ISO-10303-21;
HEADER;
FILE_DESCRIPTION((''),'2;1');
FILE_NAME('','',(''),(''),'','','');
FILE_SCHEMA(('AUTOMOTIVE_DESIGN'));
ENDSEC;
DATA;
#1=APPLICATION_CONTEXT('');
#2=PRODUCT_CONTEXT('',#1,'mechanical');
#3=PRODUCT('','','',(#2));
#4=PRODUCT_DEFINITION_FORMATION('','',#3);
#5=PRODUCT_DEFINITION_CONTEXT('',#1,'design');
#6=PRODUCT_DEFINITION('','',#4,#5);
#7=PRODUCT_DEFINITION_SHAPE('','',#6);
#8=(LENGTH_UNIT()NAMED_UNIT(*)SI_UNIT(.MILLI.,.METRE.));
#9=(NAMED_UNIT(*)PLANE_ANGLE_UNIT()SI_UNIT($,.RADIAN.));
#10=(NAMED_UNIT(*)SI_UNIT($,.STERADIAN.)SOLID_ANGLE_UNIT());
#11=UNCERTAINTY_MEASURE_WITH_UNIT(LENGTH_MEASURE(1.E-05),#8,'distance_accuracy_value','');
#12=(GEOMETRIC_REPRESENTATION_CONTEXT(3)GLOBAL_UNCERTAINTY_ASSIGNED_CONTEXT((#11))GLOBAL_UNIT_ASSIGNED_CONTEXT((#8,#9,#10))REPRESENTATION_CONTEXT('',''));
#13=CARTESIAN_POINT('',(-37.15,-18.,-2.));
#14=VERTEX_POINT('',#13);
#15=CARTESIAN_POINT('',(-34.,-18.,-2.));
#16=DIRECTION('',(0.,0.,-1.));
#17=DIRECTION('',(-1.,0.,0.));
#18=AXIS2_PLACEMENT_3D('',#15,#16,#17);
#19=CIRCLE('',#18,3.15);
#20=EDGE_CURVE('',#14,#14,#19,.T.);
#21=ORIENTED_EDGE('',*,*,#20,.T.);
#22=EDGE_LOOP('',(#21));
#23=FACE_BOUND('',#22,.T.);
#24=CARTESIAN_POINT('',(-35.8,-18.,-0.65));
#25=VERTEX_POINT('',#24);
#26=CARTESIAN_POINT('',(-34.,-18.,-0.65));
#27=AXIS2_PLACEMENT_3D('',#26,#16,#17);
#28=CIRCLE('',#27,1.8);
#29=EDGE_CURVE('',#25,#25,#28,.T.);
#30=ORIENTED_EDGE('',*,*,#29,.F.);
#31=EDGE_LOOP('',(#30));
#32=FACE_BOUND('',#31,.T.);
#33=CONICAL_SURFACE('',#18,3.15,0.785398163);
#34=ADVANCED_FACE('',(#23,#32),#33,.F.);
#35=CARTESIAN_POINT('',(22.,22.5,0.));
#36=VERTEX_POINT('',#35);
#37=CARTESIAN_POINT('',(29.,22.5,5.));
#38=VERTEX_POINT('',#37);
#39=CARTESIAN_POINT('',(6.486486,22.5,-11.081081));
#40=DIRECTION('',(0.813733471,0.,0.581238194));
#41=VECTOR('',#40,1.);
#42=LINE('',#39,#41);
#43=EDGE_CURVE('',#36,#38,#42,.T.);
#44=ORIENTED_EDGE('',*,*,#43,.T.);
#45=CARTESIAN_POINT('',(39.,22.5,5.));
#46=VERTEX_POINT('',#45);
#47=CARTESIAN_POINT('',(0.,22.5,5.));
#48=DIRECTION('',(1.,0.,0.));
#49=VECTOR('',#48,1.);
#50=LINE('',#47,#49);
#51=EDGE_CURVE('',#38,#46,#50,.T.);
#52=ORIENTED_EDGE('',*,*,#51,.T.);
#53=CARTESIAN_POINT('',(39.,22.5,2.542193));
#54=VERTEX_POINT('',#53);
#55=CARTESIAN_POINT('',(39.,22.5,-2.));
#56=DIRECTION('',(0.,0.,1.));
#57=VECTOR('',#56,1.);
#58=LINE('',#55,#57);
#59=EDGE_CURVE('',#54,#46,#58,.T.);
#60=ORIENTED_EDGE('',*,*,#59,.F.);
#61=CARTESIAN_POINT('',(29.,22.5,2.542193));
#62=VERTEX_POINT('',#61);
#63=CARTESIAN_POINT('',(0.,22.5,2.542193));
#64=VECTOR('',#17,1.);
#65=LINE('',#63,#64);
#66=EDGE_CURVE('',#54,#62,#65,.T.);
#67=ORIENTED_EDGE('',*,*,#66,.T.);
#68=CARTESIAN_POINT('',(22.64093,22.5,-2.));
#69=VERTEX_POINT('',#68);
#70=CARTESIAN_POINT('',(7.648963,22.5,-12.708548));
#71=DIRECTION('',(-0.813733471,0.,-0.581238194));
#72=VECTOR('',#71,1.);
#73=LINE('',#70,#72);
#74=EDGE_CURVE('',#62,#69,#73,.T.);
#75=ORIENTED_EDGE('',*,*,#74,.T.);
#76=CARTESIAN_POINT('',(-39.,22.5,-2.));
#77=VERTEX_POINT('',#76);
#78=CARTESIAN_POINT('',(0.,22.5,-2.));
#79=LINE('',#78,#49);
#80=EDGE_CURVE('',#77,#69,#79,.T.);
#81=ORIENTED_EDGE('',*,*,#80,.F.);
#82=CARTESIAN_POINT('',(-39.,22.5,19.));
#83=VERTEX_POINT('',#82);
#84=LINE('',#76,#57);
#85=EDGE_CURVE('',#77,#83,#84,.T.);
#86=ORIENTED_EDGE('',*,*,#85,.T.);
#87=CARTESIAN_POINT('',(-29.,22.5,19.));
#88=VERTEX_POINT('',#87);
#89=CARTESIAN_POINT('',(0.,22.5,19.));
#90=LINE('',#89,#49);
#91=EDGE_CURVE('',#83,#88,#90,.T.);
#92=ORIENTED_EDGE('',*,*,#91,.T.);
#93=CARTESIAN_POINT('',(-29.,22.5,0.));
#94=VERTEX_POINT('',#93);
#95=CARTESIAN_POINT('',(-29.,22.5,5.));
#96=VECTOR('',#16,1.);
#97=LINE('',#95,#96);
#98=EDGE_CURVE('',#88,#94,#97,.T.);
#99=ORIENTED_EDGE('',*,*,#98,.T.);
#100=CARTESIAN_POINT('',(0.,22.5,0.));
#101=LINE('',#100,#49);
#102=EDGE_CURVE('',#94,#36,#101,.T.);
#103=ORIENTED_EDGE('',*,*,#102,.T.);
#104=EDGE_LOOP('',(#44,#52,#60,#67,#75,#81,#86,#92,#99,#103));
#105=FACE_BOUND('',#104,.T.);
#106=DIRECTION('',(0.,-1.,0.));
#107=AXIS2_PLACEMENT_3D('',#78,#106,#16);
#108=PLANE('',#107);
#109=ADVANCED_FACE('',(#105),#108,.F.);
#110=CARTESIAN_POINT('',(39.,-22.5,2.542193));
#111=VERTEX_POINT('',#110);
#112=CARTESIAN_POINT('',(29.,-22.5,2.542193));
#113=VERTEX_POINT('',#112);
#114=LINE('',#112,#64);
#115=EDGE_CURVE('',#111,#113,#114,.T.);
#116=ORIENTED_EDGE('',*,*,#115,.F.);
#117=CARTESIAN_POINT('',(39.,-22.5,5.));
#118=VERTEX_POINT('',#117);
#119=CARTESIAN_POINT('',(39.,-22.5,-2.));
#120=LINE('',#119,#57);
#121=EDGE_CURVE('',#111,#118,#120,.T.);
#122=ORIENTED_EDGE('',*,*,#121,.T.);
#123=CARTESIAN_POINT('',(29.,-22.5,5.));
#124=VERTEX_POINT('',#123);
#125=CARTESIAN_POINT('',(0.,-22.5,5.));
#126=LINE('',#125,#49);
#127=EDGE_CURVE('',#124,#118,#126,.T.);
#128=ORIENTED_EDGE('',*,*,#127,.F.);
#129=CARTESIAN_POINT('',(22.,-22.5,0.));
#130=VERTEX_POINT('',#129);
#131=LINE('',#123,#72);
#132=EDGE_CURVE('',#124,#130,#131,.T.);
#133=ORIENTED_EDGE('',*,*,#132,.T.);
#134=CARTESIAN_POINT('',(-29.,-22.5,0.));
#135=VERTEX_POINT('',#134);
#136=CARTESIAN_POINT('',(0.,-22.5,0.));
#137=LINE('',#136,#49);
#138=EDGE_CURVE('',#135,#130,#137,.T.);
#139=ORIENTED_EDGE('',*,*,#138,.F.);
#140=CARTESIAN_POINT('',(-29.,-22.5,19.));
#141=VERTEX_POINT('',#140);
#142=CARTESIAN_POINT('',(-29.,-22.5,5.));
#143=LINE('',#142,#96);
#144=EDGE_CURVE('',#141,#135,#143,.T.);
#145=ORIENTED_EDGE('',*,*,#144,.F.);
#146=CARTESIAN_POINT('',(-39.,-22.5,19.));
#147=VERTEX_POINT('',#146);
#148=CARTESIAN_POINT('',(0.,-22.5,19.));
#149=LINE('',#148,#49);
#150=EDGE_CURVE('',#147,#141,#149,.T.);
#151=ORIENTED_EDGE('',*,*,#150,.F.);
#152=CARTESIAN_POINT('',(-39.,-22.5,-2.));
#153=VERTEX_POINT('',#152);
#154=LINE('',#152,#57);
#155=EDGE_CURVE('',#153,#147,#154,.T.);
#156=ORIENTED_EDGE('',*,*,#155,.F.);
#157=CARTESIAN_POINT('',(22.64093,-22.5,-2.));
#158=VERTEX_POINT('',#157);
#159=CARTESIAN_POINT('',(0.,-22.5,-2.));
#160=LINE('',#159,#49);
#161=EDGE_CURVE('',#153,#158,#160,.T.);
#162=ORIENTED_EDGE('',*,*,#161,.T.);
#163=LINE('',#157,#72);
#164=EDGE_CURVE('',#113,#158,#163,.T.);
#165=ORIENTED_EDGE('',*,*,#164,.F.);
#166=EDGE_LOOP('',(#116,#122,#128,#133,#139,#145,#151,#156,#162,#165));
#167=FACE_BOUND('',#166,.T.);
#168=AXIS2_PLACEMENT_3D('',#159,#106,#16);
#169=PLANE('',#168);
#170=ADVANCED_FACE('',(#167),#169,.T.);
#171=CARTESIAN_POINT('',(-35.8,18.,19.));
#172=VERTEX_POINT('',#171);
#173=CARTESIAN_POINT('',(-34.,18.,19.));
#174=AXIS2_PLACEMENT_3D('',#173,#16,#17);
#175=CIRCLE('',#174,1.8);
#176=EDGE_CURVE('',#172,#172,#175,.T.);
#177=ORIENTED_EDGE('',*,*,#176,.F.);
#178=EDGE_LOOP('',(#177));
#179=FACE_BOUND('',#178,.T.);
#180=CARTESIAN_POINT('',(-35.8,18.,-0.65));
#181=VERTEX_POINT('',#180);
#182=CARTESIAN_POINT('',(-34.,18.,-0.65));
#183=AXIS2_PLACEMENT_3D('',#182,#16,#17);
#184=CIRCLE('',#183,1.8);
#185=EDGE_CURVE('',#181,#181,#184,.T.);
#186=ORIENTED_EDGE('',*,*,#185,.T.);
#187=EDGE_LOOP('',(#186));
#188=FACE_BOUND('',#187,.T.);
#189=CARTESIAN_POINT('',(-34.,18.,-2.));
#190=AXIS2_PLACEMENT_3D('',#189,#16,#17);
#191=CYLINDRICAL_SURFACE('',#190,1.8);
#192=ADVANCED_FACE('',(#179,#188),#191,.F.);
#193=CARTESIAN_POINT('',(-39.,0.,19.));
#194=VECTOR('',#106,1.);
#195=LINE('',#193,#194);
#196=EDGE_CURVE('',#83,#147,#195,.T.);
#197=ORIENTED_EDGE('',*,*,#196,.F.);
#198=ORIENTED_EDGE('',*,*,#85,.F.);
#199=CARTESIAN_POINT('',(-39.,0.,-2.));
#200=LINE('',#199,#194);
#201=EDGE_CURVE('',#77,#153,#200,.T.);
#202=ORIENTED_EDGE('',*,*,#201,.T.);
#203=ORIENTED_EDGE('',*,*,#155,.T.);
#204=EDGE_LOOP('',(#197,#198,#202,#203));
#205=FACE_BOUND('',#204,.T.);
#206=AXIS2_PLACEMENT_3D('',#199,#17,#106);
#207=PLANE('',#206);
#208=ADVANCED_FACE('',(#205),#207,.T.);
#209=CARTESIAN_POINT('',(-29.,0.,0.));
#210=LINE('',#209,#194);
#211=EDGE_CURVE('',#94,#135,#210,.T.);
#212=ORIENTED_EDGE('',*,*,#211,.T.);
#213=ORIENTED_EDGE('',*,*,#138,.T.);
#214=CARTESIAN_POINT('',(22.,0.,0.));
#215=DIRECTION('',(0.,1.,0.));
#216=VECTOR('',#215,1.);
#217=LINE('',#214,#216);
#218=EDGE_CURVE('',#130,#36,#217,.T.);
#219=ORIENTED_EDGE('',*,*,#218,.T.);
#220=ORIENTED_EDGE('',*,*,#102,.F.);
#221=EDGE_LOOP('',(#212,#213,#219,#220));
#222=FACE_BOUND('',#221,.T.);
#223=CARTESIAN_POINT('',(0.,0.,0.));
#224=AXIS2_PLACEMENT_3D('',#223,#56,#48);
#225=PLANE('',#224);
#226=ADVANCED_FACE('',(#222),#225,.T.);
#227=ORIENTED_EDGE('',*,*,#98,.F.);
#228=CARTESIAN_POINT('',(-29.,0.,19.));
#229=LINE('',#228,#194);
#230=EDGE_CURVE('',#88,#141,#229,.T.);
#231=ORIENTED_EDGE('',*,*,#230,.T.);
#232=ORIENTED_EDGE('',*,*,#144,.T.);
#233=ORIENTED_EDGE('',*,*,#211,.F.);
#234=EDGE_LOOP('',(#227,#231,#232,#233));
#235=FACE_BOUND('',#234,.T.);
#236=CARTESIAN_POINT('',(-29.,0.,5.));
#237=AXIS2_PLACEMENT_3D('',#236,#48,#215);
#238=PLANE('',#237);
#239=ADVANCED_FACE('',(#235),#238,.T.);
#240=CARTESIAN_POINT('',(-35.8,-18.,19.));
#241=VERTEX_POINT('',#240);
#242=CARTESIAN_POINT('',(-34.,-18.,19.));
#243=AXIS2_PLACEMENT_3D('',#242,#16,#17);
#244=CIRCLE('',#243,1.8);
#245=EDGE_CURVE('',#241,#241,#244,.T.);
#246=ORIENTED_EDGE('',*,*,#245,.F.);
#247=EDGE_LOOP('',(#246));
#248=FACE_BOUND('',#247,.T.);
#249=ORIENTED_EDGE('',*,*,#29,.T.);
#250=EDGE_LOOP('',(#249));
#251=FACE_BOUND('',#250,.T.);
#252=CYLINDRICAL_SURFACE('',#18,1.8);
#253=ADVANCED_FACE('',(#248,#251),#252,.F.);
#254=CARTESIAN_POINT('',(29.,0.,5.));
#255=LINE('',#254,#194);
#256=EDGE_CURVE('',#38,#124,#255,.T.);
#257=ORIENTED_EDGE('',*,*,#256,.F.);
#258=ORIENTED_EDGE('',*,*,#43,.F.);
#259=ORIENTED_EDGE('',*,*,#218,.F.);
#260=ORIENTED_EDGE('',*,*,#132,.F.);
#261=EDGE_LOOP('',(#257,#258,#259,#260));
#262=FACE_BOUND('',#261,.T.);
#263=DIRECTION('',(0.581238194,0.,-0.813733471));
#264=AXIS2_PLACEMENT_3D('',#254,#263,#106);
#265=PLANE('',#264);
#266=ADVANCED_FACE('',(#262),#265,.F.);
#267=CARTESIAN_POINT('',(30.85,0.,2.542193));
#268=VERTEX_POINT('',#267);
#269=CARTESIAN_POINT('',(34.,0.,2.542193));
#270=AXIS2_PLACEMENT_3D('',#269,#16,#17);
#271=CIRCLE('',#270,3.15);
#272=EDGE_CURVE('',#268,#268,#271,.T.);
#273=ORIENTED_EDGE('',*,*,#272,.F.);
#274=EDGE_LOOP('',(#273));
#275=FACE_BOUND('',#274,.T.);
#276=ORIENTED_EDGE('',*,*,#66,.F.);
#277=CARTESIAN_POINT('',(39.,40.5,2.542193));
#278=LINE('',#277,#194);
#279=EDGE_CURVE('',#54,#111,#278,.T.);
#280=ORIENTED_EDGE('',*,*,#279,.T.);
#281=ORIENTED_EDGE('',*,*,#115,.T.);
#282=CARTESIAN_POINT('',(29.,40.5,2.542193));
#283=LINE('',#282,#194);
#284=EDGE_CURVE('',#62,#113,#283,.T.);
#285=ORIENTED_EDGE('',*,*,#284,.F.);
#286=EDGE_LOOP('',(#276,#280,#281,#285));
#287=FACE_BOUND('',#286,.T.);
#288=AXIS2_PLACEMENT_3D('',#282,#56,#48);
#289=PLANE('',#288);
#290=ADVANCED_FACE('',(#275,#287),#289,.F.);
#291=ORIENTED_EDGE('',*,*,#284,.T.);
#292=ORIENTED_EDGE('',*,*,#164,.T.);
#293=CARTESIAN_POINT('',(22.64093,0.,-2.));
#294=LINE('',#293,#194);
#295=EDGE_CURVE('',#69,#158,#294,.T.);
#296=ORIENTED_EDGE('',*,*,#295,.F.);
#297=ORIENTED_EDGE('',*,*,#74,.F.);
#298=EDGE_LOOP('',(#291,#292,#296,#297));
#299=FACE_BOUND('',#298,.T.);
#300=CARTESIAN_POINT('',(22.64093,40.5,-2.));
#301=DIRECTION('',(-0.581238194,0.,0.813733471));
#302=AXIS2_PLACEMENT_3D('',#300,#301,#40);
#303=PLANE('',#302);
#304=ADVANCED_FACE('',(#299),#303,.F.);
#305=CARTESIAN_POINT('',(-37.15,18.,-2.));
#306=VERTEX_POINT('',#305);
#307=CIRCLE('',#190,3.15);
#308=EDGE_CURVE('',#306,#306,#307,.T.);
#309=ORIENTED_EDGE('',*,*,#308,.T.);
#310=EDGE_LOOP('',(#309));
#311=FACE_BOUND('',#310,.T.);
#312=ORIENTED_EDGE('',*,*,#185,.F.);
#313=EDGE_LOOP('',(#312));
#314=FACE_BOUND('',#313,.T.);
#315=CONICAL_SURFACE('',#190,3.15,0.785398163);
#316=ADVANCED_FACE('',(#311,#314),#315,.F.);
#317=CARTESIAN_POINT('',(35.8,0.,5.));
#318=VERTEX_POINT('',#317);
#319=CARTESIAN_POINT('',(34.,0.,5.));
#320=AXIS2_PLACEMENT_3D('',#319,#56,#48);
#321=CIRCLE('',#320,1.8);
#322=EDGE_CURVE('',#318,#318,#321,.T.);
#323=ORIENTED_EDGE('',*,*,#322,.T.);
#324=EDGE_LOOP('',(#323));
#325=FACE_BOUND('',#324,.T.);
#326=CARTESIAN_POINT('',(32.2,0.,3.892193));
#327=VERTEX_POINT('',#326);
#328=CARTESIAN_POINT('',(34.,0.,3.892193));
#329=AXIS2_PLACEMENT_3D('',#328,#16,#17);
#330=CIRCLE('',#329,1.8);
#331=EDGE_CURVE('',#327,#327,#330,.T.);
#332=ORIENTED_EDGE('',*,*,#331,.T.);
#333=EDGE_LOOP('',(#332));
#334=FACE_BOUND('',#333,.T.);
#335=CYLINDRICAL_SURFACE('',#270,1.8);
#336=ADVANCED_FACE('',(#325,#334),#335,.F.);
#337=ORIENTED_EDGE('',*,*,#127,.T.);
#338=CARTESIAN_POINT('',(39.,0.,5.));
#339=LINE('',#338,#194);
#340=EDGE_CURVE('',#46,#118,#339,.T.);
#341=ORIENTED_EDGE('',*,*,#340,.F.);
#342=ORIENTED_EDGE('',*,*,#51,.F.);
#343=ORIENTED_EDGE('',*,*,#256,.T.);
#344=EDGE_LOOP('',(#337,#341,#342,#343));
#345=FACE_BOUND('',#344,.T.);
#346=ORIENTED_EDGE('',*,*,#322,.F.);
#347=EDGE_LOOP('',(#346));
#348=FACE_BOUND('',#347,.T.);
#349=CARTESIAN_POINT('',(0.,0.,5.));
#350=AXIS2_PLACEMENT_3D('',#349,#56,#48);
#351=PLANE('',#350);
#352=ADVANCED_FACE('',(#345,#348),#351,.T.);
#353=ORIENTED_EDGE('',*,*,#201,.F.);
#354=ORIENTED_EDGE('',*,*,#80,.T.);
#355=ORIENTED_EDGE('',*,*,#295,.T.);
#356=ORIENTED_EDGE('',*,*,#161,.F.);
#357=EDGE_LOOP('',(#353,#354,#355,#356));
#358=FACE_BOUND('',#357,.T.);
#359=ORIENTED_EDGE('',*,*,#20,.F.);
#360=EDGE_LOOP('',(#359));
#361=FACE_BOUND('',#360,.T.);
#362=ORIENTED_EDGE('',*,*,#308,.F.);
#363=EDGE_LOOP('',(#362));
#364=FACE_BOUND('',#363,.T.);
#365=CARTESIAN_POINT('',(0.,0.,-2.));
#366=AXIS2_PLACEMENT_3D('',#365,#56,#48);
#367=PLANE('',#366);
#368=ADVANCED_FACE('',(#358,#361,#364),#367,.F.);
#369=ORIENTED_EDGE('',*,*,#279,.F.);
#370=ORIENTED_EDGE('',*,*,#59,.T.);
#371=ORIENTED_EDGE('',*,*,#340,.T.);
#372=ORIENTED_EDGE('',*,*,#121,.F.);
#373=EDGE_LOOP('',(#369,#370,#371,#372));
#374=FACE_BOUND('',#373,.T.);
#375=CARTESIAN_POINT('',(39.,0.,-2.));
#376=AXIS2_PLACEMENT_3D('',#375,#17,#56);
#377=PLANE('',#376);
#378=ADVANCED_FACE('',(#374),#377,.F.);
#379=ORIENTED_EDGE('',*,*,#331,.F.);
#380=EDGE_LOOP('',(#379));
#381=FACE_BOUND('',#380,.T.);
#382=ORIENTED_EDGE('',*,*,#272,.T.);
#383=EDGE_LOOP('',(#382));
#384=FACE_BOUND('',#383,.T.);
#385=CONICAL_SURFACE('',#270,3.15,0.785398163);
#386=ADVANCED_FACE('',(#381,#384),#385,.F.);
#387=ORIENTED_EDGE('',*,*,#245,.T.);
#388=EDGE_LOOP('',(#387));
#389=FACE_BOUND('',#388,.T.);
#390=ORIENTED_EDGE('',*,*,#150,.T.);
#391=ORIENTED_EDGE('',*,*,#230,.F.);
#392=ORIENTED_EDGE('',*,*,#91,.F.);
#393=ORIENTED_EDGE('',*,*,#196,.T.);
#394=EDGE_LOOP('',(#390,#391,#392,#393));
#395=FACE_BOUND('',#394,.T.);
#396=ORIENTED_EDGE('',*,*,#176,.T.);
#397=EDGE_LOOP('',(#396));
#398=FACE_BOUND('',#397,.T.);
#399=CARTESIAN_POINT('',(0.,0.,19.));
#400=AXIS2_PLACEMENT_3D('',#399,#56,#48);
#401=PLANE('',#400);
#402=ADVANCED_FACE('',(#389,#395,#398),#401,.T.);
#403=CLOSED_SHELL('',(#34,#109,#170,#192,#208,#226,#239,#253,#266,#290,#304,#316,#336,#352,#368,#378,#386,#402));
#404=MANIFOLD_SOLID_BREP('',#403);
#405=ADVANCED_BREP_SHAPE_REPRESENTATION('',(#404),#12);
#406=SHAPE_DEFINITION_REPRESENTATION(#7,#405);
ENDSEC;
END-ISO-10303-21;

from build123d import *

# Parameters (mm, degrees)
SKETCH1_W                                           = 78
SKETCH1_H                                           = 45
SKETCH1_R                                           = 1.65
BOSS_EXTRUDE1_DEPTH                                 = 2
BOSS_EXTRUDE2_START                                 = 5
SKETCH1_3_W                                         = 10
SKETCH1_3_H                                         = 45
SKETCH1_3_R                                         = 1.65
BOSS_EXTRUDE2_DEPTH                                 = 5
BOSS_EXTRUDE3_START                                 = 19
SKETCH1_4_W                                         = 10
SKETCH1_4_H                                         = 45
SKETCH1_4_R                                         = 1.65
BOSS_EXTRUDE3_DEPTH                                 = 19
CHAMFER2_SIZE2                                      = 5
CHAMFER2_SIZE                                       = 7
CUT_EXTRUDE1_DEPTH                                  = 63
CSK_FOR_M3_COUNTERSUNK_FLAT_HEAD_SCREW1_D           = 3.6
CSK_FOR_M3_COUNTERSUNK_FLAT_HEAD_SCREW1_CSINK_D     = 6.3
CSK_FOR_M3_COUNTERSUNK_FLAT_HEAD_SCREW1_CSINK_ANGLE = 90
CSK_FOR_M3_COUNTERSUNK_FLAT_HEAD_SCREW2_D           = 3.6
CSK_FOR_M3_COUNTERSUNK_FLAT_HEAD_SCREW2_CSINK_D     = 6.3
CSK_FOR_M3_COUNTERSUNK_FLAT_HEAD_SCREW2_CSINK_ANGLE = 90


with BuildPart() as part:
    # Sketch1 → Boss-Extrude1 (new body)
    with BuildSketch(Plane.XY):
        Rectangle(SKETCH1_W, SKETCH1_H)
        with Locations((34, 0)):
            Circle(SKETCH1_R, mode=Mode.SUBTRACT)
        with Locations((-34, -18)):
            Circle(SKETCH1_R, mode=Mode.SUBTRACT)
        with Locations((-34, 18)):
            Circle(SKETCH1_R, mode=Mode.SUBTRACT)
    extrude(amount=-BOSS_EXTRUDE1_DEPTH)

    # Sketch1<3> → Boss-Extrude2 (add)
    # profile 1 of 2: a face of its own
    with BuildSketch(Plane.XY.offset(BOSS_EXTRUDE2_START)):
        with Locations((-34, 0)):
            Rectangle(SKETCH1_3_W, SKETCH1_3_H)
        with Locations((-34, -18)):
            Circle(SKETCH1_3_R, mode=Mode.SUBTRACT)
        with Locations((-34, 18)):
            Circle(SKETCH1_3_R, mode=Mode.SUBTRACT)
    # profile 2 of 2: a face of its own
    with BuildSketch(Plane.XY.offset(BOSS_EXTRUDE2_START)):
        with Locations((34, 0)):
            Rectangle(SKETCH1_3_W, SKETCH1_3_H)
        with Locations((34, 0)):
            Circle(SKETCH1_3_R, mode=Mode.SUBTRACT)
    extrude(amount=-BOSS_EXTRUDE2_DEPTH)

    # Sketch1<4> → Boss-Extrude3 (add)
    with BuildSketch(Plane.XY.offset(BOSS_EXTRUDE3_START)):
        with Locations((-34, 0)):
            Rectangle(SKETCH1_4_W, SKETCH1_4_H)
        with Locations((-34, -18)):
            Circle(SKETCH1_4_R, mode=Mode.SUBTRACT)
        with Locations((-34, 18)):
            Circle(SKETCH1_4_R, mode=Mode.SUBTRACT)
    extrude(amount=-BOSS_EXTRUDE3_DEPTH)

    # Chamfer2
    chamfer2_edges = [part.edges().sort_by_distance(p)[0] for p in [
        (29, 0, 0),
    ]]
    chamfer2_side = [part.faces().sort_by_distance(p)[0] for p in [
        (28.9, 0, 0),
    ]]
    chamfer(chamfer2_edges, length=CHAMFER2_SIZE - 0.0001, length2=CHAMFER2_SIZE2 - 0.0001, reference=chamfer2_side[0])  # a hair under: the kernel refuses the full size

    # Sketch2 → Cut-Extrude1 (cut)
    with BuildSketch(Plane.XZ.offset(22.5)):
        Polygon((22.640930107, -2), (29, 2.542192781), (39, 2.542192781), (39, -2), align=None)
    extrude(amount=-CUT_EXTRUDE1_DEPTH, mode=Mode.SUBTRACT)

    # CSK for M3 Countersunk Flat Head Screw1 (through all)
    with Locations(Plane(origin=(0, 0, 2.542192781), x_dir=(-1, 0, 0), z_dir=(0, 0, -1))):
        with Locations((-34, 0)):
            CounterSinkHole(CSK_FOR_M3_COUNTERSUNK_FLAT_HEAD_SCREW1_D / 2, CSK_FOR_M3_COUNTERSUNK_FLAT_HEAD_SCREW1_CSINK_D / 2, counter_sink_angle=CSK_FOR_M3_COUNTERSUNK_FLAT_HEAD_SCREW1_CSINK_ANGLE)

    # CSK for M3 Countersunk Flat Head Screw2 (through all)
    with Locations(Plane(origin=(0, 0, -2), x_dir=(-1, 0, 0), z_dir=(0, 0, -1))):
        with Locations((34, -18), (34, 18)):
            CounterSinkHole(CSK_FOR_M3_COUNTERSUNK_FLAT_HEAD_SCREW2_D / 2, CSK_FOR_M3_COUNTERSUNK_FLAT_HEAD_SCREW2_CSINK_D / 2, counter_sink_angle=CSK_FOR_M3_COUNTERSUNK_FLAT_HEAD_SCREW2_CSINK_ANGLE)


solid = part.part
